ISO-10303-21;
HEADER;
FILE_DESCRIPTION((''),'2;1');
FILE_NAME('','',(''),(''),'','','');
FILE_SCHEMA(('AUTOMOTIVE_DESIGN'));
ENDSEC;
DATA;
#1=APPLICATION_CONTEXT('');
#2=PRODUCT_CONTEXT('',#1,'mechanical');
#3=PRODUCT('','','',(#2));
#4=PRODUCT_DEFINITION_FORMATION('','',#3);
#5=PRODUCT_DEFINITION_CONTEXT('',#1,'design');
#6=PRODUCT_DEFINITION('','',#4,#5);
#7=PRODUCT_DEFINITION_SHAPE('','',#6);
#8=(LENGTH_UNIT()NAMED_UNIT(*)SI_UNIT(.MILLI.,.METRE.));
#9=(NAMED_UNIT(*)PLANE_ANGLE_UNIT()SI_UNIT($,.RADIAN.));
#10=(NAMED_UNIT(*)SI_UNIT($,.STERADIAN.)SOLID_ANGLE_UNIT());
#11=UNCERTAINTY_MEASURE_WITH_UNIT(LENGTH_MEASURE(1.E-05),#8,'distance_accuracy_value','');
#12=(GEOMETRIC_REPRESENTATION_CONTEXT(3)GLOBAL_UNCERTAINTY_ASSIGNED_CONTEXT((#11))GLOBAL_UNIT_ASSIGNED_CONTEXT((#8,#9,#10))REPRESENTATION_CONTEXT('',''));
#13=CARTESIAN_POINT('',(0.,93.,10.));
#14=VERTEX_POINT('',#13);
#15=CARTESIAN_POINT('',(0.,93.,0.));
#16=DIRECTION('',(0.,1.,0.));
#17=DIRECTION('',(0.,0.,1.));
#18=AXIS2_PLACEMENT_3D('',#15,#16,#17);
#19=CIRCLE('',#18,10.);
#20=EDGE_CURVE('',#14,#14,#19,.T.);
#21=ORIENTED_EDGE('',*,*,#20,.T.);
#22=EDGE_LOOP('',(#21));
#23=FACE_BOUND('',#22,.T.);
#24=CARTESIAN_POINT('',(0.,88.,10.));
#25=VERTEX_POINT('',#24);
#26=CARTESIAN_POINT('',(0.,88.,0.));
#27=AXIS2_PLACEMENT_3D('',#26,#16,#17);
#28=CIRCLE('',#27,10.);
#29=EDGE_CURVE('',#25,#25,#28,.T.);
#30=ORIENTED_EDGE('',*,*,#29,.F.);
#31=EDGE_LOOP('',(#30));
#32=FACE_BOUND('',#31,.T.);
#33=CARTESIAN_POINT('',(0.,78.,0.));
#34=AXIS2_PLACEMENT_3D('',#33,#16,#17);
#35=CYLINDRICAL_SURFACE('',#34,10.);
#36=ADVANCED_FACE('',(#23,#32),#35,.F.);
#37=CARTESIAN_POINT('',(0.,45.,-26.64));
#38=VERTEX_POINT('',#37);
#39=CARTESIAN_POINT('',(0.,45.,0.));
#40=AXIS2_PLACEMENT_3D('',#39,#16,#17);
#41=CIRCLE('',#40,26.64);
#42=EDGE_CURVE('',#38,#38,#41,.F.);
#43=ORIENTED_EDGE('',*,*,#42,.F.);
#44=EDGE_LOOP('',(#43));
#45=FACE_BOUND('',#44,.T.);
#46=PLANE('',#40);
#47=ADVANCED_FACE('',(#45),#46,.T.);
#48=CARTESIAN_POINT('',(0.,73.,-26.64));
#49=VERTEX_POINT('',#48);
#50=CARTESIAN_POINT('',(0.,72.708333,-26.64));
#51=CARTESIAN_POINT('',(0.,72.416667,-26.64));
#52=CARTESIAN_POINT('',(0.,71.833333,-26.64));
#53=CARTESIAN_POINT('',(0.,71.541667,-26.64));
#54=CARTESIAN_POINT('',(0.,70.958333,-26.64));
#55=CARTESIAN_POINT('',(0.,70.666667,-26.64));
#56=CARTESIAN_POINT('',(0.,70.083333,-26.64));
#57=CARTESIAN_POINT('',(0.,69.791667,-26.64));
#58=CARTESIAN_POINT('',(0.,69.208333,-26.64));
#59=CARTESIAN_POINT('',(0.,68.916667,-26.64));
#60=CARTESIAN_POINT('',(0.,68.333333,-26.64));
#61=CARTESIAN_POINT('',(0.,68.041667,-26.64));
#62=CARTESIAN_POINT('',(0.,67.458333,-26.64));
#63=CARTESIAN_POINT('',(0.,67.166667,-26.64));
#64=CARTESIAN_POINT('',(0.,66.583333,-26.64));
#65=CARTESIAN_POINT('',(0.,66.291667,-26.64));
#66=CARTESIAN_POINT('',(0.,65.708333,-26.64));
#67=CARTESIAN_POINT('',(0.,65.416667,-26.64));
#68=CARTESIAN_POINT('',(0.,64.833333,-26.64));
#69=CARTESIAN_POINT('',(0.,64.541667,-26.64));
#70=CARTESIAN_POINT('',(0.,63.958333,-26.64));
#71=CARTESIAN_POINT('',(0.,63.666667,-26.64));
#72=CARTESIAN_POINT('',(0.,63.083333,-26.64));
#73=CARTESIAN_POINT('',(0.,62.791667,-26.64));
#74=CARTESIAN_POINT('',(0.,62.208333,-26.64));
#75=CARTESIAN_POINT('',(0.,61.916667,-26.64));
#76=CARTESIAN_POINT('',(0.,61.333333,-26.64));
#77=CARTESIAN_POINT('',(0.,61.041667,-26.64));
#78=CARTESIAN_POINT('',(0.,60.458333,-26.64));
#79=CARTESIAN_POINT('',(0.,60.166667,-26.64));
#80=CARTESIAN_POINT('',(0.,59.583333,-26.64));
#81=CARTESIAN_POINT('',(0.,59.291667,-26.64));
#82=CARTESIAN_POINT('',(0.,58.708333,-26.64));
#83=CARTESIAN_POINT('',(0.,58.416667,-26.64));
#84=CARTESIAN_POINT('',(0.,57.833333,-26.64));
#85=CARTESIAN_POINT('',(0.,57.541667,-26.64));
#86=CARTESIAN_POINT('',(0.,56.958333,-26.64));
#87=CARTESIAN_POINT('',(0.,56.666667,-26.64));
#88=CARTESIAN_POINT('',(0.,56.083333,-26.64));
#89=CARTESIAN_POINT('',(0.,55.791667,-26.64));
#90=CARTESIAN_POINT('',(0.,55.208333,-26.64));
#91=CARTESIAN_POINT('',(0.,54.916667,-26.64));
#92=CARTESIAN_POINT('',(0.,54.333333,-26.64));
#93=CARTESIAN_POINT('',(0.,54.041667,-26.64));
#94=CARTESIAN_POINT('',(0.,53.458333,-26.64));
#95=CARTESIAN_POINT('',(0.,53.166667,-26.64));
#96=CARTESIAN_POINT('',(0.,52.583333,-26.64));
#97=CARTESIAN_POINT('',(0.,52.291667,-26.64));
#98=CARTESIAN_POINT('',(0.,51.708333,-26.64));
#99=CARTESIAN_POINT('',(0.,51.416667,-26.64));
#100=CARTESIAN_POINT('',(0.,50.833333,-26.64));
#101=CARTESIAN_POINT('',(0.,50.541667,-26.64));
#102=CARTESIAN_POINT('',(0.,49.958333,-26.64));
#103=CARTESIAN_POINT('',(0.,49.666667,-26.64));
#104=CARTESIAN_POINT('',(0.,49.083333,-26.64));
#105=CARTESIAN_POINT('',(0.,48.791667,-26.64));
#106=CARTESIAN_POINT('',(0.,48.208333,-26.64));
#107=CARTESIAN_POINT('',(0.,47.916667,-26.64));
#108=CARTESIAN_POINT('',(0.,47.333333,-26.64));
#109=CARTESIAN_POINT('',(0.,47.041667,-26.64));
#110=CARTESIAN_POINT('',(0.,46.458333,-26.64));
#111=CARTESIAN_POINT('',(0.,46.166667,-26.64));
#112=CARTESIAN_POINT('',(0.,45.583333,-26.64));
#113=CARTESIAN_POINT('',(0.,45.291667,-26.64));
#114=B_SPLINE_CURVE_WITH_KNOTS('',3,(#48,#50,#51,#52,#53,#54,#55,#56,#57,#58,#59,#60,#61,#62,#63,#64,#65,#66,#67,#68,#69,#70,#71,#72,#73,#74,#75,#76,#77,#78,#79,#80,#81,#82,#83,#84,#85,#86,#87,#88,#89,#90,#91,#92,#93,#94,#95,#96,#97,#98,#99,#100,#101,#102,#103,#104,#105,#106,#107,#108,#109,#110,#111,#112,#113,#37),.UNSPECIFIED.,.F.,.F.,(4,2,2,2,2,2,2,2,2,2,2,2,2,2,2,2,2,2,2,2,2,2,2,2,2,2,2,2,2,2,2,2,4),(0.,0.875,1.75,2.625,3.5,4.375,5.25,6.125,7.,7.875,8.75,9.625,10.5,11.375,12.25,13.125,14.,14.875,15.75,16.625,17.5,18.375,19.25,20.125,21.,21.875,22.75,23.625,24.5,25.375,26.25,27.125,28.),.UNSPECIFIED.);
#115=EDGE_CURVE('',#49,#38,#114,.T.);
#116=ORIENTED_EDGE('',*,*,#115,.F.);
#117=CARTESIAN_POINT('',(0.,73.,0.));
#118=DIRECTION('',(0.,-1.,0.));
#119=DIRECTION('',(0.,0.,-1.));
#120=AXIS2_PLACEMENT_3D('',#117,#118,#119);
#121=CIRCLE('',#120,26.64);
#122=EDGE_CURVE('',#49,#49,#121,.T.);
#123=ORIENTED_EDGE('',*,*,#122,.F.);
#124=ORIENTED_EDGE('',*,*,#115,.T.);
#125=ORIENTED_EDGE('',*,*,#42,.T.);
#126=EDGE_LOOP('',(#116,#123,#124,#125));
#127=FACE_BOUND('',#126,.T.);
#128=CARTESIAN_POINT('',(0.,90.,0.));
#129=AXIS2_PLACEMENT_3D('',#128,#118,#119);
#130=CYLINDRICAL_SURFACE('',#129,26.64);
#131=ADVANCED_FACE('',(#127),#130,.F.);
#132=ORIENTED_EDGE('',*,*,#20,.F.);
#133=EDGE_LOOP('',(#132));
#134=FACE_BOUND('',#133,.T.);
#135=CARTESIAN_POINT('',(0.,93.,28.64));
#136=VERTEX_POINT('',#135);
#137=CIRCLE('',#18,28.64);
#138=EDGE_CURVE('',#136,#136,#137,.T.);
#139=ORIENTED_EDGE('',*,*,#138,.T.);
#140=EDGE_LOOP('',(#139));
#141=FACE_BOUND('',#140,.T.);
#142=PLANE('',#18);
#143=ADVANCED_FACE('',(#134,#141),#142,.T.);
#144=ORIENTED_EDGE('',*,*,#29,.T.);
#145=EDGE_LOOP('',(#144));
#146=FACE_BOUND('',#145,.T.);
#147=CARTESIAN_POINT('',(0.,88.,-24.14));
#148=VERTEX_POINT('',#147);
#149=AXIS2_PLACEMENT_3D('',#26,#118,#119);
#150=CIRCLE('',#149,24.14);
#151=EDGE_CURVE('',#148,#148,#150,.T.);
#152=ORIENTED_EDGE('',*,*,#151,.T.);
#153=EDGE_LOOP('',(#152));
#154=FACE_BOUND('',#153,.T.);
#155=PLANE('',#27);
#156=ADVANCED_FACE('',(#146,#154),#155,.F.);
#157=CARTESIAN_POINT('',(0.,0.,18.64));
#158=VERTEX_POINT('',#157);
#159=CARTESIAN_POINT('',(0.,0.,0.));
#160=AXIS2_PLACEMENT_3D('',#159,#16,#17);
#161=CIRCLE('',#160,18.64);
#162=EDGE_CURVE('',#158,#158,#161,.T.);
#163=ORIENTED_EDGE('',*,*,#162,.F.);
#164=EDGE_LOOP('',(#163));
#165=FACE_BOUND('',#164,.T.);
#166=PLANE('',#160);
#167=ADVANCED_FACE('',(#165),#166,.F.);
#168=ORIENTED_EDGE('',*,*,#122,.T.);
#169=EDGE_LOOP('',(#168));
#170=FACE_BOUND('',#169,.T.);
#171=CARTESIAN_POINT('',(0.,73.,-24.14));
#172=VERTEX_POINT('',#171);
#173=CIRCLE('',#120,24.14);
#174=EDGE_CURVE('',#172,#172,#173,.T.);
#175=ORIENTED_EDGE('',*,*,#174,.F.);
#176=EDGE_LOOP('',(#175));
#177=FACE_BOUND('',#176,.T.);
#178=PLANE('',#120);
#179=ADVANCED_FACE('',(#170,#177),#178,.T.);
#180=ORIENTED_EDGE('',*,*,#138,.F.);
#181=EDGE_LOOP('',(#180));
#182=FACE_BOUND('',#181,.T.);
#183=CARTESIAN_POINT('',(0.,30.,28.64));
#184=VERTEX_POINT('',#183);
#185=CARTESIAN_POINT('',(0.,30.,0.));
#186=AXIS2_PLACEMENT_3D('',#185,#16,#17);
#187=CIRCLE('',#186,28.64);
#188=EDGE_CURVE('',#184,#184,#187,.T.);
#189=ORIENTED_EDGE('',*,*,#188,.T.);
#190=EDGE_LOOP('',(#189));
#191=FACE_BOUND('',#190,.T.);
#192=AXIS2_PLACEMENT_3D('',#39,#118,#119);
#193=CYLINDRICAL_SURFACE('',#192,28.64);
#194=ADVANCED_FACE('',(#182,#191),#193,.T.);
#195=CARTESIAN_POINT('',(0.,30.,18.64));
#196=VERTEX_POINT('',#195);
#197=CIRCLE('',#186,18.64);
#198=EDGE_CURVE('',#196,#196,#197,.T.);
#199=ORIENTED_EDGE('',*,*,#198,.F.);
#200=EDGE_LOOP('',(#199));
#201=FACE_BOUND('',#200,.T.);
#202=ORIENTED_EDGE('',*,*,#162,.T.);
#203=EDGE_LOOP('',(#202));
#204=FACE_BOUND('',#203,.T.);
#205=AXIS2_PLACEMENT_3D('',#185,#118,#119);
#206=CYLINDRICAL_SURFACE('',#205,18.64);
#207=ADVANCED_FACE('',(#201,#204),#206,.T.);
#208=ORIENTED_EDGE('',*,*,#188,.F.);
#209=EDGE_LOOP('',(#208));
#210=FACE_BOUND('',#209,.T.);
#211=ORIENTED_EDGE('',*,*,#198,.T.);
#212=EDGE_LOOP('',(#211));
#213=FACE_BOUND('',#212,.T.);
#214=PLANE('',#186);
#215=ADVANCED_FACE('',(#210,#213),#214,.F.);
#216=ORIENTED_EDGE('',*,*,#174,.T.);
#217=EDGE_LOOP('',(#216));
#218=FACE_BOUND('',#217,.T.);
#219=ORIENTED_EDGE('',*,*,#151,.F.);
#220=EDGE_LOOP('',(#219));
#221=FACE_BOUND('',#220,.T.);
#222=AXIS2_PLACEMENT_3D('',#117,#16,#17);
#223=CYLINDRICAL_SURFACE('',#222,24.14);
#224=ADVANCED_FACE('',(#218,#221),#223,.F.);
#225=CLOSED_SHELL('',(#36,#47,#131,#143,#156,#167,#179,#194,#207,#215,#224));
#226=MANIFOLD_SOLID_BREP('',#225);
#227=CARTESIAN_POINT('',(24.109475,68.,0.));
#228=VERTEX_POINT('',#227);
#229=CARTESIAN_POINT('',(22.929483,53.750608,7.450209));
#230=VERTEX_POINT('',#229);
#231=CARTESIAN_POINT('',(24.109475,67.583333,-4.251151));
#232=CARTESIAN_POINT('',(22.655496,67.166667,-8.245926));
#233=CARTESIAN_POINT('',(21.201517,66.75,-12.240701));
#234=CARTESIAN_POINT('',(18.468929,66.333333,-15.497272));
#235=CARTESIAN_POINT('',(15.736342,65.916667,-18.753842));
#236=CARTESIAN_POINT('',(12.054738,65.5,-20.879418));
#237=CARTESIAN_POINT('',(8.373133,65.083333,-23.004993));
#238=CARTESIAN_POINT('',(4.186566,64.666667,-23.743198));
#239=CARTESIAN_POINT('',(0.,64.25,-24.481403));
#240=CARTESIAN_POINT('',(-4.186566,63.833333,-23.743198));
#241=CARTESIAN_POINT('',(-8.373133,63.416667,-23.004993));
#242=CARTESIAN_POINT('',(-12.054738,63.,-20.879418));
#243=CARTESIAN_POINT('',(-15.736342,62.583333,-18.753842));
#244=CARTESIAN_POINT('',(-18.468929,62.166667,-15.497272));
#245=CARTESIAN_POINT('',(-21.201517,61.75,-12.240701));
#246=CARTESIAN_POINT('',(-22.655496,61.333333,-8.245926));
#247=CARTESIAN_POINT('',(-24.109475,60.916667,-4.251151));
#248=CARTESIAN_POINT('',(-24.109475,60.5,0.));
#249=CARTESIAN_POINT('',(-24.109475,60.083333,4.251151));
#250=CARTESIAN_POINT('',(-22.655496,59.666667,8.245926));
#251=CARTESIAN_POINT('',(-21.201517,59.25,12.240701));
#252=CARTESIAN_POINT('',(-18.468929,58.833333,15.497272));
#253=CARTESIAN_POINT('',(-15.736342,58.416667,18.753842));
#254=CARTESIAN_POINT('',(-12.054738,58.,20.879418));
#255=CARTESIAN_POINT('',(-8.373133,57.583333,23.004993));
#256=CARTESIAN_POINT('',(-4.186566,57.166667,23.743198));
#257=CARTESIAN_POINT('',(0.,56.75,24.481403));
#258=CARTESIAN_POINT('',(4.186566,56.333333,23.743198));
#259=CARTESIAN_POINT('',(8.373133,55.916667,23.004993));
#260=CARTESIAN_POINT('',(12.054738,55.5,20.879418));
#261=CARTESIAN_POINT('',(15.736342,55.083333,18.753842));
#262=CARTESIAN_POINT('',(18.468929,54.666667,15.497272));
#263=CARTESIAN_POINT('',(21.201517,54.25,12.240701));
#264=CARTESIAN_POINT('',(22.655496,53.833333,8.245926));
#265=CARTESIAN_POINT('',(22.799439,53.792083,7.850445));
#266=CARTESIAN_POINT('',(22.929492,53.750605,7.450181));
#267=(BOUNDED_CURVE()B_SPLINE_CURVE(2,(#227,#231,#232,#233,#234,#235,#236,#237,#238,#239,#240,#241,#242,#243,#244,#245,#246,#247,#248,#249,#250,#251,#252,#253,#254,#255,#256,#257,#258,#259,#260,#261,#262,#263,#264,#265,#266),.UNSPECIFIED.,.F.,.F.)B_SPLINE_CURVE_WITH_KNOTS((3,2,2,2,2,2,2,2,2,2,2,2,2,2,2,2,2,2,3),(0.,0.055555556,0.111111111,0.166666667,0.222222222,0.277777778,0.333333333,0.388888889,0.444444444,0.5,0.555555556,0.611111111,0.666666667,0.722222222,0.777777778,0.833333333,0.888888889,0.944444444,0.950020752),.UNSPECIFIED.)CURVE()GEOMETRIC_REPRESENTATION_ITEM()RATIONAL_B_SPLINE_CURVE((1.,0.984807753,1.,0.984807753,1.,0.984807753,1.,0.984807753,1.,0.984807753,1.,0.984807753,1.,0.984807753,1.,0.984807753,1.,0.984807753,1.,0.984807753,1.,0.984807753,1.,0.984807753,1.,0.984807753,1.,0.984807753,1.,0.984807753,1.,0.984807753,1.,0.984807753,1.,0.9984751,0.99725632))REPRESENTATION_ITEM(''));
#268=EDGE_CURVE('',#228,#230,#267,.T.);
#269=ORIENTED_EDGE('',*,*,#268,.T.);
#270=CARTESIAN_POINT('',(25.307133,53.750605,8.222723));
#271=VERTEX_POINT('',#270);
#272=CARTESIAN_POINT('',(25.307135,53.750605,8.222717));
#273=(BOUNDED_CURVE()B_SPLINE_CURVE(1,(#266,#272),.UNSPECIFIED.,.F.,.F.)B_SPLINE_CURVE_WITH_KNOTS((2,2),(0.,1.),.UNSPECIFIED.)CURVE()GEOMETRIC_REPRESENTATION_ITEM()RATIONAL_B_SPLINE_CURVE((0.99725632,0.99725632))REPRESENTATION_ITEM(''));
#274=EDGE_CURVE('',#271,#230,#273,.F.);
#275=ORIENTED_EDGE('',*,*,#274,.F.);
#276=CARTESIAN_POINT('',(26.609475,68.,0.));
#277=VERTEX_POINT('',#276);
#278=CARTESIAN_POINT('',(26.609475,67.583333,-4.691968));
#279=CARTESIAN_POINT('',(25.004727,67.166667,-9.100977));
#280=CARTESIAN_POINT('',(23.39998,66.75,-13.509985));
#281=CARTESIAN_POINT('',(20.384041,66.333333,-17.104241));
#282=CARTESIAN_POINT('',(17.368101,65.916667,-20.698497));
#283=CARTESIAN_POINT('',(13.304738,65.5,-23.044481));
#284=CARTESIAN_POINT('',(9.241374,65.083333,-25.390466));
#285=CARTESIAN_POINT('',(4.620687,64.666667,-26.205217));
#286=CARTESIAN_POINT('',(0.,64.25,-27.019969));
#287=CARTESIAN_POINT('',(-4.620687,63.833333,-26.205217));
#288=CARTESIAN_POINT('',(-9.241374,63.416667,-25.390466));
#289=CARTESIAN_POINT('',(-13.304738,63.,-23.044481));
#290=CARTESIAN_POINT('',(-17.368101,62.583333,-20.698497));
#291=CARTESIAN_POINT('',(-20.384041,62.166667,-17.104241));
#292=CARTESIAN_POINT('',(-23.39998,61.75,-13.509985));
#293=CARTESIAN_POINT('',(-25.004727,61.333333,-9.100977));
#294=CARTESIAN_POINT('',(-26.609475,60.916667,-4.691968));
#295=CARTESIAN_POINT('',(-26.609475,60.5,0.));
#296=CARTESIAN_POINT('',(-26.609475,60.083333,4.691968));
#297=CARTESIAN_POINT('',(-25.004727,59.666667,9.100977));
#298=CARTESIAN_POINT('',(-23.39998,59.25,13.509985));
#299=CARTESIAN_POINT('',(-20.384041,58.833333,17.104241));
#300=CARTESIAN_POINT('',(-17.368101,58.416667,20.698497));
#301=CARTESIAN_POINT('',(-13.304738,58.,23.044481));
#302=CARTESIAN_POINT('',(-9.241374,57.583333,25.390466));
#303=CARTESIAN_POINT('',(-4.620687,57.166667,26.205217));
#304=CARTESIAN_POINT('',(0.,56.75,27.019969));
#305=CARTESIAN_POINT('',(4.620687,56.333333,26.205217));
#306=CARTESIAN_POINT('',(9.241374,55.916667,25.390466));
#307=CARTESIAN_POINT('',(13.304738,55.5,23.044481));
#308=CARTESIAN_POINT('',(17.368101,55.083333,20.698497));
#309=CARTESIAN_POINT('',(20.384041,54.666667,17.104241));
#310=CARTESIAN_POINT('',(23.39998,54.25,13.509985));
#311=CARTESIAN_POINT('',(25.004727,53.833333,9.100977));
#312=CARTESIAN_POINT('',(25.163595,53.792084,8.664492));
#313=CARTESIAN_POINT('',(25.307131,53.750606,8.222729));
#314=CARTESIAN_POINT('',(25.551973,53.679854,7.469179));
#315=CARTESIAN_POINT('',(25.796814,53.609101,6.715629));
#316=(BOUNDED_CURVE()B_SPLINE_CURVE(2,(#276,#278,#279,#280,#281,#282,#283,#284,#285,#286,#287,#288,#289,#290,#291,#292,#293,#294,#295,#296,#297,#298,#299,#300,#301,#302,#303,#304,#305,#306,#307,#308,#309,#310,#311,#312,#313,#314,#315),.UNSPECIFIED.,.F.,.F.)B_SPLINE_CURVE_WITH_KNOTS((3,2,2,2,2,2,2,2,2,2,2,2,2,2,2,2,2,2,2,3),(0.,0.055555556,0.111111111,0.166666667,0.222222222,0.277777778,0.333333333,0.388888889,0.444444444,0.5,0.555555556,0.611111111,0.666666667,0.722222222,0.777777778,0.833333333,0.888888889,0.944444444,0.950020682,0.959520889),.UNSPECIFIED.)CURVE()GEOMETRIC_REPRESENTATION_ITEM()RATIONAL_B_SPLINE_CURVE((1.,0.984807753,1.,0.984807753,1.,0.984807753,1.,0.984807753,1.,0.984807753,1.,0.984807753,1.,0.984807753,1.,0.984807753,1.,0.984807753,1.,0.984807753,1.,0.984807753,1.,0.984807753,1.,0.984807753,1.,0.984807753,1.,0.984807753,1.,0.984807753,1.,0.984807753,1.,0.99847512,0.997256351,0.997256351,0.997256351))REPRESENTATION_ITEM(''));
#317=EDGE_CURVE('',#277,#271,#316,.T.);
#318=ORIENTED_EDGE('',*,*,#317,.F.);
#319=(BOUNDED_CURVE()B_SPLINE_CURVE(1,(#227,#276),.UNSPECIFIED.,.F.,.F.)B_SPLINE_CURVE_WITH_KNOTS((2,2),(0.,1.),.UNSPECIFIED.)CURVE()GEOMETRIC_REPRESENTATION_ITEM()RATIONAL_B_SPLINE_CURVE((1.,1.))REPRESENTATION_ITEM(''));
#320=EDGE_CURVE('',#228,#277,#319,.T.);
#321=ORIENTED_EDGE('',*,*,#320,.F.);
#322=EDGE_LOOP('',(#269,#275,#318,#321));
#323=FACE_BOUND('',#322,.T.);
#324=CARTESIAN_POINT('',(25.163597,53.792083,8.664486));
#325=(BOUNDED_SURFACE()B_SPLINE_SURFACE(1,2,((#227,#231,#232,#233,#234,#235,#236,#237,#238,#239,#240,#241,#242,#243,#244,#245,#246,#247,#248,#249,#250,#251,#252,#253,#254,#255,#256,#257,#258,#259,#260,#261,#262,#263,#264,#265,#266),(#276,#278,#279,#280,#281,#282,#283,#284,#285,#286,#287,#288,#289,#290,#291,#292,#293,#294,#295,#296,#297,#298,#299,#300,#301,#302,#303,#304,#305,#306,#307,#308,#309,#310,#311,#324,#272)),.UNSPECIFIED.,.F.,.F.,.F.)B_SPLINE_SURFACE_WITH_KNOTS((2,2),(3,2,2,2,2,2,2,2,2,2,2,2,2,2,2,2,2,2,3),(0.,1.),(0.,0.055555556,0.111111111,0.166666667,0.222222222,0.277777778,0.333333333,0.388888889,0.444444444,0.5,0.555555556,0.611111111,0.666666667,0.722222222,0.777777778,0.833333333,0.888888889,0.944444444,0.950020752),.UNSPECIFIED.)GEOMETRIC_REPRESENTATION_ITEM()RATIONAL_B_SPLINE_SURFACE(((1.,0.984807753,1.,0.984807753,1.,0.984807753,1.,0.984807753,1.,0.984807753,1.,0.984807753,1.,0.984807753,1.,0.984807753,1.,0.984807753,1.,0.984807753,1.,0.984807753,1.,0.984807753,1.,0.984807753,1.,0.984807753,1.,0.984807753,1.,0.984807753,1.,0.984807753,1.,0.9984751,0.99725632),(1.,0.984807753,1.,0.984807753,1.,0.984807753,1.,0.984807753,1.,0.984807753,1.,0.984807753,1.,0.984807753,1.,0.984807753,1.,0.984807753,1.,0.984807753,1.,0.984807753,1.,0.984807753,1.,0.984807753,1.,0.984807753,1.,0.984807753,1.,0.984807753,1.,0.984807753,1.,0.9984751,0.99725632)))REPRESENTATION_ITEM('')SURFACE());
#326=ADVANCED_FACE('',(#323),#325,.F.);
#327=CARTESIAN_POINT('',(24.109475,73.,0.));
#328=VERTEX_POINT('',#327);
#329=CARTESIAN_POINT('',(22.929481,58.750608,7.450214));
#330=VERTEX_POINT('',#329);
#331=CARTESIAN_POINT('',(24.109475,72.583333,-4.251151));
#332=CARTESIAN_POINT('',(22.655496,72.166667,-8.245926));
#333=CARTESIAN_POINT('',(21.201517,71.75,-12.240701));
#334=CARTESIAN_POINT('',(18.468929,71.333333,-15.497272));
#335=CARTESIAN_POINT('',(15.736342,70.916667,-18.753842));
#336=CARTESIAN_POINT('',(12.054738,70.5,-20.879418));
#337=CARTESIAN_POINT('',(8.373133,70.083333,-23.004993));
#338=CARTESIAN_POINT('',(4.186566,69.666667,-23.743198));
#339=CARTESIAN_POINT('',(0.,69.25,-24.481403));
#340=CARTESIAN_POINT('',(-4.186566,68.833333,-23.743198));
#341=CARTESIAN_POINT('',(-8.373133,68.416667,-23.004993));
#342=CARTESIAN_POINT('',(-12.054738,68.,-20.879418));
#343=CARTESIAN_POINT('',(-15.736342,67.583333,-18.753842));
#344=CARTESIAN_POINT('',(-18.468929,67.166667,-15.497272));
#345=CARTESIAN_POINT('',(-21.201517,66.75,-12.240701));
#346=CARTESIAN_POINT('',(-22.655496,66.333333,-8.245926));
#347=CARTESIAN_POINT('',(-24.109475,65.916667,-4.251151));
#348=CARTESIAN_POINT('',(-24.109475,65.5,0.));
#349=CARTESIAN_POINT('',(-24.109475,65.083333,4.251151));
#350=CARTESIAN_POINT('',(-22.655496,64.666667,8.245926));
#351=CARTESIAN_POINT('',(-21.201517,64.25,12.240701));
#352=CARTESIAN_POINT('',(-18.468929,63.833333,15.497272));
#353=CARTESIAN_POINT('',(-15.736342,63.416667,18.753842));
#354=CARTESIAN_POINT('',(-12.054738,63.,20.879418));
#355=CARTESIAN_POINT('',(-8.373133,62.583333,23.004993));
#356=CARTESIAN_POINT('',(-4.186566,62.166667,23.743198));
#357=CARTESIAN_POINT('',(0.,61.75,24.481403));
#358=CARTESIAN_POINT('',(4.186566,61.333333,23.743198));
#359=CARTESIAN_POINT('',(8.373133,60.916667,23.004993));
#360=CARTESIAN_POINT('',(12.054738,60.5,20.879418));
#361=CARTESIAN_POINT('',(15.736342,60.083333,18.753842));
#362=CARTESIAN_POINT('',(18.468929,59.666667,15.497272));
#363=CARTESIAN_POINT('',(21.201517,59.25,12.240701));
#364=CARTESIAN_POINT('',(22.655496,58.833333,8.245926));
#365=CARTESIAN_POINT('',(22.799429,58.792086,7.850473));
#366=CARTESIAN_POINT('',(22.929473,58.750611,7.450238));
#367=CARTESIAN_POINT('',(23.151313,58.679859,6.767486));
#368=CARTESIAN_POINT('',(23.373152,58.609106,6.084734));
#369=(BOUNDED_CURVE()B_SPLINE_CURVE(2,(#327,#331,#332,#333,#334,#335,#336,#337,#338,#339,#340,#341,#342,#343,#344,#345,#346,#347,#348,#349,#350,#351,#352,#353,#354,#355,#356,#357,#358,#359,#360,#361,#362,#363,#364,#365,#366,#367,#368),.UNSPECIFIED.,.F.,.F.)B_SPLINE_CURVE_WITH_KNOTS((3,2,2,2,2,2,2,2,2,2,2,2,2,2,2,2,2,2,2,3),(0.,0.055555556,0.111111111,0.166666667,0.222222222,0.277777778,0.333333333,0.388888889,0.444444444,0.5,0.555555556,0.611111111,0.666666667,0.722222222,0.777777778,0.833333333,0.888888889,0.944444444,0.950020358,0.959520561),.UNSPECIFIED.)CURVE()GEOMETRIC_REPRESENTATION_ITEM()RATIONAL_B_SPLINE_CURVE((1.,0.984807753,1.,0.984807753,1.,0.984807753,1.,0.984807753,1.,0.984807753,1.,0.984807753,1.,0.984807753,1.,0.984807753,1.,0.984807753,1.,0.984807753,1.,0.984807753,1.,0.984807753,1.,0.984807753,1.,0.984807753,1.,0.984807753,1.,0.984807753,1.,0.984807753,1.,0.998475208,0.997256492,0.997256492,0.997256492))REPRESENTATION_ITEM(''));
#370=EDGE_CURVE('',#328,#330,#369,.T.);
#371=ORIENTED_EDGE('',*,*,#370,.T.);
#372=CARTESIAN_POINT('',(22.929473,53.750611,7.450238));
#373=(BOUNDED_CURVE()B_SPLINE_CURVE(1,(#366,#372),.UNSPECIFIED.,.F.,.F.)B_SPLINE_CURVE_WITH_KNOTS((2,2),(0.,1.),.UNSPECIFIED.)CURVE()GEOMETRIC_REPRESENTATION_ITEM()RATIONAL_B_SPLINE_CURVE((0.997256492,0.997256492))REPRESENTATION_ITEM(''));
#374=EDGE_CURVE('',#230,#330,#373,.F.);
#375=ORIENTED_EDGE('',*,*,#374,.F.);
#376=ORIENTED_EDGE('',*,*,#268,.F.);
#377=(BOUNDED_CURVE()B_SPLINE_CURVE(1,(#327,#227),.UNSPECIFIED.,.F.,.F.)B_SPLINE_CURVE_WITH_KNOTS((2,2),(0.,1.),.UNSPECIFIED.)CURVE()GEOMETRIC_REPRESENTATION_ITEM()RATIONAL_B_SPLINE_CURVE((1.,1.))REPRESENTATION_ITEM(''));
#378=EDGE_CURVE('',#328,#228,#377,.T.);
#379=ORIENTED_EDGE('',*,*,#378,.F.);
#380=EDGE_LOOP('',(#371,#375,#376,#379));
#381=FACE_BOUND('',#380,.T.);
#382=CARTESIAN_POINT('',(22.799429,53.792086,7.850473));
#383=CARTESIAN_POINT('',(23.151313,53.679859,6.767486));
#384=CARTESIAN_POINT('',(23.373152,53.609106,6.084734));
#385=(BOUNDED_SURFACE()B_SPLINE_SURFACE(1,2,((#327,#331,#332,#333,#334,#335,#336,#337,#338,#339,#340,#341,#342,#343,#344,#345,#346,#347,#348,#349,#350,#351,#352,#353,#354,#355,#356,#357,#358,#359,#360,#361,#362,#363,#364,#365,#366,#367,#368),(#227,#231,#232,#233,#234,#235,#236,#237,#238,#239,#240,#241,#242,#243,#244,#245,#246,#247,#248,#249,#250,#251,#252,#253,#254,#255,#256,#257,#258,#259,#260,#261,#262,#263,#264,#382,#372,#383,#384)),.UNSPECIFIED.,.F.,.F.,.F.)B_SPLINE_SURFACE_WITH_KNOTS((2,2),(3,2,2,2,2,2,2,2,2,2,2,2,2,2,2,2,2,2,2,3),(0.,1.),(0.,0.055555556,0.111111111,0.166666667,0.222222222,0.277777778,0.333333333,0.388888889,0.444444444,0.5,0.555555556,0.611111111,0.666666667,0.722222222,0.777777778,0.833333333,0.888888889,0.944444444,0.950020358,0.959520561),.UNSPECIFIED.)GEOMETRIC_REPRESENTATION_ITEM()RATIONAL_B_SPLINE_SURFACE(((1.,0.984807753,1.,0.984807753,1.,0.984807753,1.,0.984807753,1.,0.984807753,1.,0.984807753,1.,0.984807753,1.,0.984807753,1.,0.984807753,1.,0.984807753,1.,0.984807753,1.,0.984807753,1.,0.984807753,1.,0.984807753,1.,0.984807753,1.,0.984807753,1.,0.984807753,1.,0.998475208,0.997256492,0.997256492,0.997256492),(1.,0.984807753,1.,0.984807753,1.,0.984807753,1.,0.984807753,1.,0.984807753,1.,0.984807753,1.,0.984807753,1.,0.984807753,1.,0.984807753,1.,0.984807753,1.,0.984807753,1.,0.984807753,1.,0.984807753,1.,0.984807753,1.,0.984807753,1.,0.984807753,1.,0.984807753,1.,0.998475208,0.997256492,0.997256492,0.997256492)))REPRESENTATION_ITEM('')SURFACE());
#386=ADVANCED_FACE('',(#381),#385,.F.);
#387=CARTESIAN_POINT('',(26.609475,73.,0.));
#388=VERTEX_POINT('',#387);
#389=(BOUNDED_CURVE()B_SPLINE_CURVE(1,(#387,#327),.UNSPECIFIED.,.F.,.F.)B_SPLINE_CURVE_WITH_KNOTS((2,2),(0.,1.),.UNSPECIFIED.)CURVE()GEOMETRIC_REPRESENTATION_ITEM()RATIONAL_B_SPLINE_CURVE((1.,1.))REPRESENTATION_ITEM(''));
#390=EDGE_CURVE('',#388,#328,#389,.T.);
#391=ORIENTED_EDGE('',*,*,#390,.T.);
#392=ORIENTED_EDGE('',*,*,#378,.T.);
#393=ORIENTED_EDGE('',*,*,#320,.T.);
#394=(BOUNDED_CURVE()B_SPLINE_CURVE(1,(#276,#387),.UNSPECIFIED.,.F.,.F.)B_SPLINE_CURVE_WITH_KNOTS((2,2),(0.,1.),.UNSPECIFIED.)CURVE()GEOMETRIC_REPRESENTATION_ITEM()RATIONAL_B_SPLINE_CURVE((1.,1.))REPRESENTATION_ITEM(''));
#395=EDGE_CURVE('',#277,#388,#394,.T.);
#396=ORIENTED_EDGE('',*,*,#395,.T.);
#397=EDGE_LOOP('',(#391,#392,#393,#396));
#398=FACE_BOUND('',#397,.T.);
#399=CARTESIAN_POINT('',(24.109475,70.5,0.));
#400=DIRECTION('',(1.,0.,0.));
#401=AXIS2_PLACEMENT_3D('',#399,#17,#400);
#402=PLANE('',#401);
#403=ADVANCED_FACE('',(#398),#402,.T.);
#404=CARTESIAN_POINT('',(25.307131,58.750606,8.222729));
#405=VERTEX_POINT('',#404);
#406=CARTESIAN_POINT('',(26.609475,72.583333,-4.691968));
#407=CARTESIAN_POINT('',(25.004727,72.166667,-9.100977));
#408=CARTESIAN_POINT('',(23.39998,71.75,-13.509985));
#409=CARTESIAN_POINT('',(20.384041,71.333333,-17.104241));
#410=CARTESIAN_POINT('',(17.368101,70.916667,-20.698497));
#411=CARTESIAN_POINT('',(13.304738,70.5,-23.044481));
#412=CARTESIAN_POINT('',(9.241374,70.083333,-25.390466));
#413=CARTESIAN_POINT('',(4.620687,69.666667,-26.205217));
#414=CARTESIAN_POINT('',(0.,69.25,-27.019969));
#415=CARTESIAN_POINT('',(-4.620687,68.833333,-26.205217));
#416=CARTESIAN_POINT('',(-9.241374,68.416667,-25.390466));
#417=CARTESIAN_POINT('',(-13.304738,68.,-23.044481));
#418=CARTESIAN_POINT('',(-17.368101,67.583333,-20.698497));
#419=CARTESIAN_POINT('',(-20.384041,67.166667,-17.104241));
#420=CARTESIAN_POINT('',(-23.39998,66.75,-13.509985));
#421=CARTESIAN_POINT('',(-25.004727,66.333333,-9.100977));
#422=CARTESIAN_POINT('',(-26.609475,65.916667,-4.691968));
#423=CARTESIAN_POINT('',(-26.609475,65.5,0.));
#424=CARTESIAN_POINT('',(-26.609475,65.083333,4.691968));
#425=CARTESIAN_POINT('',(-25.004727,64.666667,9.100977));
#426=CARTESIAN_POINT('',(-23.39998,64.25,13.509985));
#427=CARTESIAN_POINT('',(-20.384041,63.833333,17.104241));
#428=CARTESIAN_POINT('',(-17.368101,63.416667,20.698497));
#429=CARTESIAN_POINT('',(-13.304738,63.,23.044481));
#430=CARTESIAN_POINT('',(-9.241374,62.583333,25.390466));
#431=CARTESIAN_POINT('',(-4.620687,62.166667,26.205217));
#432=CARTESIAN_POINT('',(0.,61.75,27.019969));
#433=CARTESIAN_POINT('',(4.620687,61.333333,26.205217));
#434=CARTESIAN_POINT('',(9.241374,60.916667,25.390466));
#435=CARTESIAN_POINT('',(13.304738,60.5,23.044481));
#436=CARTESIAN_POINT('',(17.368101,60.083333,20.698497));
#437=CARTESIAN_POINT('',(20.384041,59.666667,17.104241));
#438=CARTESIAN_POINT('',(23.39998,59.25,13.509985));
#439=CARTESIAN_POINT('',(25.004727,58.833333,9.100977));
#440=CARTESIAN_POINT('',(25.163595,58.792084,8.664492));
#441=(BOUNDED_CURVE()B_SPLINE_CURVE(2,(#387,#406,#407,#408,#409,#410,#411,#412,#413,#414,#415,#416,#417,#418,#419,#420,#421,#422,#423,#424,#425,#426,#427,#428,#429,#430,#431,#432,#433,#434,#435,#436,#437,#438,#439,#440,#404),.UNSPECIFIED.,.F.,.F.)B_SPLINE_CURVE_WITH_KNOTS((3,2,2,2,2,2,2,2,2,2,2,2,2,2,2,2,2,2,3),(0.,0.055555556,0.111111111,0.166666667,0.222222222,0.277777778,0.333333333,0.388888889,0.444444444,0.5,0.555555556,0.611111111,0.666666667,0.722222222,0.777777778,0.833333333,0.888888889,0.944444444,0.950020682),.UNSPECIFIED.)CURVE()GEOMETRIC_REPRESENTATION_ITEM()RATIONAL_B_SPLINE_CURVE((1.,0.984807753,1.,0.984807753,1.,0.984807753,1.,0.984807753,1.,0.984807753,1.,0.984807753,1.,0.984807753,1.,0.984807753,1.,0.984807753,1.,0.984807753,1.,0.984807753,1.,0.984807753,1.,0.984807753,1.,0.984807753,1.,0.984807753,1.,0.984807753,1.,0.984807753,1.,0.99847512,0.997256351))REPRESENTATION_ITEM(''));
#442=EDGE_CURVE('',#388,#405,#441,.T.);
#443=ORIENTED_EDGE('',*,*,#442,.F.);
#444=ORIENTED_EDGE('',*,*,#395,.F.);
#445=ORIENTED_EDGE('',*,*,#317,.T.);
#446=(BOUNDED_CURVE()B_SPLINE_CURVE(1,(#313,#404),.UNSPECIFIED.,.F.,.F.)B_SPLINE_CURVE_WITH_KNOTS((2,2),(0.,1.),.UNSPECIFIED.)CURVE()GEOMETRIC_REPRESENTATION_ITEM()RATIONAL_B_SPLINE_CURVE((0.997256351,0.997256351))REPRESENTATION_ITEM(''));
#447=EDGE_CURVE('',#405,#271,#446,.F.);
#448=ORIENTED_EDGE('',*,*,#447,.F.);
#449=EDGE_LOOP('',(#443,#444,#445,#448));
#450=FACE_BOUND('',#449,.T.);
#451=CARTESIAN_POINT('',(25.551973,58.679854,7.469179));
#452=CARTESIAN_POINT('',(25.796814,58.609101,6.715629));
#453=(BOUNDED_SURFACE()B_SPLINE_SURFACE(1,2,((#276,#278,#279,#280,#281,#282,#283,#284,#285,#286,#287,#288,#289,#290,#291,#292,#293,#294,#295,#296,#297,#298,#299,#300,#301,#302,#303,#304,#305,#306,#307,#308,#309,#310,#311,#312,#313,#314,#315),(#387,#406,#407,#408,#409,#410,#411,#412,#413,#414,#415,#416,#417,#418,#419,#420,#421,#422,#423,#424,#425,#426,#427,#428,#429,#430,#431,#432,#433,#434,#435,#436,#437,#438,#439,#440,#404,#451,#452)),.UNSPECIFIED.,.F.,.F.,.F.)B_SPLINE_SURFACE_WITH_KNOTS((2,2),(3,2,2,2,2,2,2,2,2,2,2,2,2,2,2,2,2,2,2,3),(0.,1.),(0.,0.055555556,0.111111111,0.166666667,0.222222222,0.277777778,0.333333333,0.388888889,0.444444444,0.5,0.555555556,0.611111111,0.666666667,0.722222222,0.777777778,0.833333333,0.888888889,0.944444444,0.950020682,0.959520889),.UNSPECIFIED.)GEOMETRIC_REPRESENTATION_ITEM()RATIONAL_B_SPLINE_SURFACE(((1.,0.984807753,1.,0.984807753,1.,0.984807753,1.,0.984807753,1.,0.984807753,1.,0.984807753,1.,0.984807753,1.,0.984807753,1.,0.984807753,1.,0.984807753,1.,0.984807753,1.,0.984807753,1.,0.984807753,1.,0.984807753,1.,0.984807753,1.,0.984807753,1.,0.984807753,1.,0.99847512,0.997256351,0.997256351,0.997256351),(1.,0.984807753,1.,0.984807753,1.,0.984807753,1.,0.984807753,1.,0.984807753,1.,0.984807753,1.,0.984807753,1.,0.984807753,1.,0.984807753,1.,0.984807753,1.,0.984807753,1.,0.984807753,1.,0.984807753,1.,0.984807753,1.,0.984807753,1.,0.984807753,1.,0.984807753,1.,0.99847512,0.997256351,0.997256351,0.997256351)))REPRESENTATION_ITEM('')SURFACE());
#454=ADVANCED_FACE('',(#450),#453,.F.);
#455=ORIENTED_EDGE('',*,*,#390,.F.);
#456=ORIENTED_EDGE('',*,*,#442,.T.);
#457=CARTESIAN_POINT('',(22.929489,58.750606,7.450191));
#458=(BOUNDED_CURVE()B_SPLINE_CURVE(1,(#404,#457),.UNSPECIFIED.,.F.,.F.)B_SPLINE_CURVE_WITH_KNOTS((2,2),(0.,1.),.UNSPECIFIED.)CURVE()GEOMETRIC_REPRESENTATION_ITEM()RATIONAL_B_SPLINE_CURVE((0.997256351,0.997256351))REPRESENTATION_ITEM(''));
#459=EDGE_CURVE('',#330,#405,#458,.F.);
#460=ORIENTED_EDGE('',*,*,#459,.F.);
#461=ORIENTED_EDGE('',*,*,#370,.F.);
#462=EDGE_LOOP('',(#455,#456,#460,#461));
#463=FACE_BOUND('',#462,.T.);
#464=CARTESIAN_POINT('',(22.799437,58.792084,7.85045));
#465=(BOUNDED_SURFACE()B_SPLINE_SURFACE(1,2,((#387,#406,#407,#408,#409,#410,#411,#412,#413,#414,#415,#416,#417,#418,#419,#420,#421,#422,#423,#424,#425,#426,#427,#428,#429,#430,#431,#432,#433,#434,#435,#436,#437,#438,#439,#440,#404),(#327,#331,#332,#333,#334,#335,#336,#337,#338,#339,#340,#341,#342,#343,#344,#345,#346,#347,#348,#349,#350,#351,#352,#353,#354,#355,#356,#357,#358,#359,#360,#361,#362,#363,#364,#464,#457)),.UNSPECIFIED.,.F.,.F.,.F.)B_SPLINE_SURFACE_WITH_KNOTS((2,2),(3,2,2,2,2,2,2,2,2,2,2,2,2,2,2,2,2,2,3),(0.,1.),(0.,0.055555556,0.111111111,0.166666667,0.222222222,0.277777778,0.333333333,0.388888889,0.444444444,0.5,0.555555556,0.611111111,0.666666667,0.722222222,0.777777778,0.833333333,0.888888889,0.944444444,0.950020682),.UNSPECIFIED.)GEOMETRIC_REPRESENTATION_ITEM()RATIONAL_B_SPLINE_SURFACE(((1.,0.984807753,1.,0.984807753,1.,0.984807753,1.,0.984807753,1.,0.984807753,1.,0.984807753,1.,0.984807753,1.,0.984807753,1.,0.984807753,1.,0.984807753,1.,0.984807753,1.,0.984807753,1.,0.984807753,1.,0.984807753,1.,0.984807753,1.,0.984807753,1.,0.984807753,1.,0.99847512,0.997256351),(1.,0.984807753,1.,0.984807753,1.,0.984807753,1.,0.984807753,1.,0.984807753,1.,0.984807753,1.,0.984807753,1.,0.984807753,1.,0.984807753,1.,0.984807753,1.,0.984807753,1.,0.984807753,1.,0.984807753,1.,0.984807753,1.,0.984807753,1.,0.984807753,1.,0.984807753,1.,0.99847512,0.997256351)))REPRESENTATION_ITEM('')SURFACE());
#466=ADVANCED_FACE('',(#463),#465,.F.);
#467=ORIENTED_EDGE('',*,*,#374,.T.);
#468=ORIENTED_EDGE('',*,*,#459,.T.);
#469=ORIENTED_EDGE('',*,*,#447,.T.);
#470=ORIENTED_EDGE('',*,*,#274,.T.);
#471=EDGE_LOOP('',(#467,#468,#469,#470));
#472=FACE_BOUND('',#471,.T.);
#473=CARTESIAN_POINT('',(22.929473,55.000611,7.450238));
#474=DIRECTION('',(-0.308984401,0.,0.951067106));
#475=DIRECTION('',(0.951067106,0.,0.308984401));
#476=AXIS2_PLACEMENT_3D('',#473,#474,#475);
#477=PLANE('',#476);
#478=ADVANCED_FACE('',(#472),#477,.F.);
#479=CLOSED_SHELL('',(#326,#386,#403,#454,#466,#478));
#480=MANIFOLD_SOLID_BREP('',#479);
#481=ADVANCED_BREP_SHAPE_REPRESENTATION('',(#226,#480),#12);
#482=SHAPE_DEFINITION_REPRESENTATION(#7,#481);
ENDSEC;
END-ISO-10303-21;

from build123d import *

# Parameters (mm, degrees)
SKETCH1_R           = 18.64
BOSS_EXTRUDE2_DEPTH = 30
SKETCH2_R           = 28.64
BOSS_EXTRUDE3_DEPTH = 15
SKETCH3_R           = 28.64
SKETCH3_R_2         = 26.64
BOSS_EXTRUDE4_DEPTH = 45
CHAMFER1_SIZE       = 2
BOSS_EXTRUDE5_START = 88
SKETCH4_R           = 28.64
BOSS_EXTRUDE5_DEPTH = 5
CHAMFER2_SIZE       = 2
BOSS_EXTRUDE6_START = 15
SKETCH5_R           = 26.64
SKETCH5_R_2         = 24.14
BOSS_EXTRUDE6_DEPTH = 15
SWEEP2_PITCH        = 15
SWEEP2_HEIGHT       = 14.25
SWEEP2_RADIUS       = 25.39
SWEEP2_START_ANGLE  = 90
SKETCH14_W          = 2.5
SKETCH14_H          = 5
SKETCH15_R          = 10
CUT_EXTRUDE1_DEPTH  = 15


with BuildPart() as part:
    # Sketch1 → Boss-Extrude2 (new body)
    with BuildSketch(Plane(origin=(0, 0, 0), x_dir=(1, 0, 0), z_dir=(0, 1, 0))):
        with Locations(Location((0, 0, 0), (0, 0, 270))):
            Circle(SKETCH1_R)
    extrude(amount=BOSS_EXTRUDE2_DEPTH)

    # Sketch2 → Boss-Extrude3 (add)
    with BuildSketch(Plane(origin=(0, 30, 0), x_dir=(1, 0, 0), z_dir=(0, 1, 0))):
        with Locations(Location((0, 0, 0), (0, 0, 270))):
            Circle(SKETCH2_R)
    extrude(amount=BOSS_EXTRUDE3_DEPTH)

    # Sketch3 → Boss-Extrude4 (add)
    with BuildSketch(Plane(origin=(0, 45, 0), x_dir=(1, 0, 0), z_dir=(0, 1, 0))):
        with Locations(Location((0, 0, 0), (0, 0, 270))):
            Circle(SKETCH3_R)
        with Locations(Location((0, 0, 0), (0, 0, 90))):
            Circle(SKETCH3_R_2, mode=Mode.SUBTRACT)
    extrude(amount=BOSS_EXTRUDE4_DEPTH)

    # Chamfer1
    chamfer1_edges = [part.edges().sort_by_distance(p)[0] for p in [
        (0, 90, 26.64),
    ]]
    chamfer(chamfer1_edges, length=CHAMFER1_SIZE - 0.0001)  # a hair under: the kernel refuses the full size



with BuildPart() as body_2:
    # Sketch4 → Boss-Extrude5 (new body)
    with BuildSketch(Plane(origin=(0, 0, 0), x_dir=(1, 0, 0), z_dir=(0, 1, 0)).offset(BOSS_EXTRUDE5_START)):
        with Locations(Location((0, 0, 0), (0, 0, 270))):
            Circle(SKETCH4_R)
    extrude(amount=BOSS_EXTRUDE5_DEPTH)

    # Chamfer2
    chamfer2_edges = [body_2.edges().sort_by_distance(p)[0] for p in [
        (0, 88, -28.64),
    ]]
    chamfer(chamfer2_edges, length=CHAMFER2_SIZE)


with BuildPart() as part_1:
    add(part.part)

    add(body_2.part)  # Boss-Extrude6 merges body 2
    # Sketch5 → Boss-Extrude6 (add)
    with BuildSketch(Plane.XZ.offset(-88).offset(BOSS_EXTRUDE6_START)):
        with Locations(Location((0, 0, 0), (0, 0, 270))):
            Circle(SKETCH5_R)
        with Locations(Location((0, 0, 0), (0, 0, 270))):
            Circle(SKETCH5_R_2, mode=Mode.SUBTRACT)
    extrude(amount=-BOSS_EXTRUDE6_DEPTH)

    # Sketch15 → Cut-Extrude1 (cut)
    with BuildSketch(Plane(origin=(0, 93, 0), x_dir=(1, 0, 0), z_dir=(0, 1, 0))):
        with Locations(Location((0, 0, 0), (0, 0, 270))):
            Circle(SKETCH15_R)
    extrude(amount=-CUT_EXTRUDE1_DEPTH, mode=Mode.SUBTRACT)


with BuildPart() as body_2_2:
    # Sweep2: sweep along a helix
    with BuildLine() as sweep2_path:
        add(Helix(SWEEP2_PITCH, SWEEP2_HEIGHT, SWEEP2_RADIUS, center=(0, 73, 0), direction=(0, -1, 0), lefthand=True, mode=Mode.PRIVATE).rotate(Axis((0, 73, 0), (0, -1, 0)), SWEEP2_START_ANGLE))
    # Sketch14 → Sweep2 (sweep)
    with BuildSketch(Plane.XY):
        with Locations((25.359475185, 70.5)):
            Rectangle(SKETCH14_W, SKETCH14_H)
    sweep(path=sweep2_path.line, is_frenet=True)


solid = Compound([part_1.part, body_2_2.part])
